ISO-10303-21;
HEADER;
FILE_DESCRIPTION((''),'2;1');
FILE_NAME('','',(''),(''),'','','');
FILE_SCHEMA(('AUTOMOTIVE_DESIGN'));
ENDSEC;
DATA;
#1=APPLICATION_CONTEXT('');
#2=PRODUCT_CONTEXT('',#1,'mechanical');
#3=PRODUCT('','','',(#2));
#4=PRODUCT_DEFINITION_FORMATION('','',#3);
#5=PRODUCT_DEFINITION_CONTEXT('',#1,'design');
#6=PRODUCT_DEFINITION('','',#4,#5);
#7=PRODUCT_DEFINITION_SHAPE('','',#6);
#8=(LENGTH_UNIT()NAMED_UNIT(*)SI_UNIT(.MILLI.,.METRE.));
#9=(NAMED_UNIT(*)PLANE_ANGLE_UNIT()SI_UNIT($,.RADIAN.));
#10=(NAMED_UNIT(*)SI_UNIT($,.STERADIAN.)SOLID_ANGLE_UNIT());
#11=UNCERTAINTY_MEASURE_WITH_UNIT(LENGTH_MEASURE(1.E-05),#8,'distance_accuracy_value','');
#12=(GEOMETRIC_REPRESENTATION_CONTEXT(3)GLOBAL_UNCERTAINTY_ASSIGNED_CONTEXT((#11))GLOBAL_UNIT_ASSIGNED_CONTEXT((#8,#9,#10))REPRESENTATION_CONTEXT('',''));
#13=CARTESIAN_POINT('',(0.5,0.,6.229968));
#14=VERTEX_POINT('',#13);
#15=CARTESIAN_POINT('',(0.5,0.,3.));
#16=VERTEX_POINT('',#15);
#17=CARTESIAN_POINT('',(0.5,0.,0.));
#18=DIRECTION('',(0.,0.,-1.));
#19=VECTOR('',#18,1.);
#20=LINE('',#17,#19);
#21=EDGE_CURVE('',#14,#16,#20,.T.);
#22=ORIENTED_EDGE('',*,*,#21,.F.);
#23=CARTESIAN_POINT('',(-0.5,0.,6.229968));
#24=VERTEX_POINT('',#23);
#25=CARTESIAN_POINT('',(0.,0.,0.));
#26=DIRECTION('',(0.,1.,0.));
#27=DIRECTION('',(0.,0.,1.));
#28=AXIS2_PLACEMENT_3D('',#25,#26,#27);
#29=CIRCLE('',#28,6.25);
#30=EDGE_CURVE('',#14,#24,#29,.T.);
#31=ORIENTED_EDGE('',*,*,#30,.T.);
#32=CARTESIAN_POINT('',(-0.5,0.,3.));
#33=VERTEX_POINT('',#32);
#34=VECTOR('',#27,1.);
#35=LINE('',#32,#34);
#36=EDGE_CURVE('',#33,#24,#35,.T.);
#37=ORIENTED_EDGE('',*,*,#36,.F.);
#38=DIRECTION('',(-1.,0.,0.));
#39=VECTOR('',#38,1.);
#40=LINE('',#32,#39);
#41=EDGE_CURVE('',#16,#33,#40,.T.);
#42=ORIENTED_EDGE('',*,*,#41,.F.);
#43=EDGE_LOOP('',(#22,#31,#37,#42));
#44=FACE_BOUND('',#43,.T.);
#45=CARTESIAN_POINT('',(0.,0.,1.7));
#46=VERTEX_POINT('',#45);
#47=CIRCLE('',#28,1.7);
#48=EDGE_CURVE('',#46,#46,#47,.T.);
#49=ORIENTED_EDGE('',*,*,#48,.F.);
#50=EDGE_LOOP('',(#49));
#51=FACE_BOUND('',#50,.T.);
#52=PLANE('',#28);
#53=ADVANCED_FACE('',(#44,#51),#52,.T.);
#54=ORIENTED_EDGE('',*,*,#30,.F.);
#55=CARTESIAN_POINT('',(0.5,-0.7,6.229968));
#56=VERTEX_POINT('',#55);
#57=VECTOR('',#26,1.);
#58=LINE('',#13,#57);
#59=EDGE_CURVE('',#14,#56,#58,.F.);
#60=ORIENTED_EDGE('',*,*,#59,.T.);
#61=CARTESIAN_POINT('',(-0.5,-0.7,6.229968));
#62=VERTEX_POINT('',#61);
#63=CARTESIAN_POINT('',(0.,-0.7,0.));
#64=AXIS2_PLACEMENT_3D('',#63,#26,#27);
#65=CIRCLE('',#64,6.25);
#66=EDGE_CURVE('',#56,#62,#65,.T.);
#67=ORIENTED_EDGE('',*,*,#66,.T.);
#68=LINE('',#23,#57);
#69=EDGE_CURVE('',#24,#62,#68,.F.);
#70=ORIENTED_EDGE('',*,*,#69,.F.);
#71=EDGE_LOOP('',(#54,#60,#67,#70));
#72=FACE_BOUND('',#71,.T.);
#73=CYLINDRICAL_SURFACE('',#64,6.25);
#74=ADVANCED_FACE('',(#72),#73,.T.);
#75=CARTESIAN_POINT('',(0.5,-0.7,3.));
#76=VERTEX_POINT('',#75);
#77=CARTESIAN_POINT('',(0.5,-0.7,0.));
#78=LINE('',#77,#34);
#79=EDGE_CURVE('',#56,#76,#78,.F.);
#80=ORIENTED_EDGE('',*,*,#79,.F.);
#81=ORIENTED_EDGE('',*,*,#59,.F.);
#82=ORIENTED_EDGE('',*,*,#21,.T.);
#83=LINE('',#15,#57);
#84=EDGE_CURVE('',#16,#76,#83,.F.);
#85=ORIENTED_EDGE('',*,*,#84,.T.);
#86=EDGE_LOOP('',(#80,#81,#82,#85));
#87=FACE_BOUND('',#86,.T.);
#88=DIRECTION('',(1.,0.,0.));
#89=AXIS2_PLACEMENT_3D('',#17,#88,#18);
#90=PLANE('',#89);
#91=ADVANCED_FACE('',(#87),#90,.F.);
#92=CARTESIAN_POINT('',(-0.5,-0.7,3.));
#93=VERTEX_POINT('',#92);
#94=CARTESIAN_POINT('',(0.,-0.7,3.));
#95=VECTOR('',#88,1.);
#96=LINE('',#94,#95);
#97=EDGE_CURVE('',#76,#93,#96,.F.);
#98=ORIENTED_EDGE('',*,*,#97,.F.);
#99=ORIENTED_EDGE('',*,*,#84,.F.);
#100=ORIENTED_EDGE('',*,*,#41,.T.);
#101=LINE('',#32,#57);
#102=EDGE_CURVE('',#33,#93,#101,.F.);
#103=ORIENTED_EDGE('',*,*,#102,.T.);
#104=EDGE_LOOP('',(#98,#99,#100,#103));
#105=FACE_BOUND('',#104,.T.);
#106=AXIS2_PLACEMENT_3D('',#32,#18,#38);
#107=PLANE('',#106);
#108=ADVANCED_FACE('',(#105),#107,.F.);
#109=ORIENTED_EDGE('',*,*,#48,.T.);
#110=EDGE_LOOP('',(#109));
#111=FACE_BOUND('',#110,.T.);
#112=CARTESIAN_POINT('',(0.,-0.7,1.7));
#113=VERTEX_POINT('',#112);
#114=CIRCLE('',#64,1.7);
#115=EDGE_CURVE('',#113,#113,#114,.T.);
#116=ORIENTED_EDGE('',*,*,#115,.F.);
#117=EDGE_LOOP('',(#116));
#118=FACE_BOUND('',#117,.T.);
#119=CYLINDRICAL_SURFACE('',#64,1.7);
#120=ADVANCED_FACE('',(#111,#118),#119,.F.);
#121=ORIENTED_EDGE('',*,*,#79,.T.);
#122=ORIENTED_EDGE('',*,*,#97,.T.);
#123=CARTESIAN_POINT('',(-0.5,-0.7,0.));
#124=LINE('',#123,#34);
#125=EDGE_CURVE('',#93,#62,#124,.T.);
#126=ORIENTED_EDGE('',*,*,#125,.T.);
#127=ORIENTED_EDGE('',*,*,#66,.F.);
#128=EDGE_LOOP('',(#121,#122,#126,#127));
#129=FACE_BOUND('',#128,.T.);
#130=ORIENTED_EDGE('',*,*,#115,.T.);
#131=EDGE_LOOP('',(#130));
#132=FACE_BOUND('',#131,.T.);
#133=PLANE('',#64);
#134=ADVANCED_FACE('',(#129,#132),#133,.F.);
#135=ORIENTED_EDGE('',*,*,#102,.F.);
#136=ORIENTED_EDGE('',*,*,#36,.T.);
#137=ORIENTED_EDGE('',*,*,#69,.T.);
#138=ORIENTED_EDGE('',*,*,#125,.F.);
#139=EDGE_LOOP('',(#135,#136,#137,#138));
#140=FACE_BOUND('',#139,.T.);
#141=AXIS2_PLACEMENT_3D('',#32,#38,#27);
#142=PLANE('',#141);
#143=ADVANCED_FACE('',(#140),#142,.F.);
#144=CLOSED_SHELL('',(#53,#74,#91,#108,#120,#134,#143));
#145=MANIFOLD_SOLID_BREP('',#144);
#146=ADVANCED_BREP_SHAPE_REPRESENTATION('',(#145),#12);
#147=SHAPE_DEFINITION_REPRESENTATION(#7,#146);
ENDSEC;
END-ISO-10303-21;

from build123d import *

# Parameters (mm, degrees)
SKETCH1_R          = 6.25
BASE_FLANGE1_DEPTH = 0.7
SKETCH4_W          = 1
SKETCH4_H          = 3.25
CUT_EXTRUDE1_DEPTH = 0.7
SKETCH5_R          = 1.7
CUT_EXTRUDE2_DEPTH = 0.7


# Sheet-metal steps are written as plain solids
with BuildPart() as part:
    # Sketch1 → Base-Flange1 (new body)
    with BuildSketch(Plane(origin=(0, 0, 0), x_dir=(1, 0, 0), z_dir=(0, 1, 0))):
        with Locations(Location((0, 0, 0), (0, 0, 270))):
            Circle(SKETCH1_R)
    extrude(amount=-BASE_FLANGE1_DEPTH)

    # Sketch4 → Cut-Extrude1 (cut)
    with BuildSketch(Plane(origin=(0, 0, 0), x_dir=(1, 0, 0), z_dir=(0, 1, 0))):
        with Locations((0, -4.625)):
            Rectangle(SKETCH4_W, SKETCH4_H)
    extrude(amount=-CUT_EXTRUDE1_DEPTH, mode=Mode.SUBTRACT)

    # Sketch5 → Cut-Extrude2 (cut)
    with BuildSketch(Plane(origin=(0, 0, 0), x_dir=(1, 0, 0), z_dir=(0, 1, 0))):
        with Locations(Location((0, 0, 0), (0, 0, 270))):
            Circle(SKETCH5_R)
    extrude(amount=-CUT_EXTRUDE2_DEPTH, mode=Mode.SUBTRACT)


solid = part.part
